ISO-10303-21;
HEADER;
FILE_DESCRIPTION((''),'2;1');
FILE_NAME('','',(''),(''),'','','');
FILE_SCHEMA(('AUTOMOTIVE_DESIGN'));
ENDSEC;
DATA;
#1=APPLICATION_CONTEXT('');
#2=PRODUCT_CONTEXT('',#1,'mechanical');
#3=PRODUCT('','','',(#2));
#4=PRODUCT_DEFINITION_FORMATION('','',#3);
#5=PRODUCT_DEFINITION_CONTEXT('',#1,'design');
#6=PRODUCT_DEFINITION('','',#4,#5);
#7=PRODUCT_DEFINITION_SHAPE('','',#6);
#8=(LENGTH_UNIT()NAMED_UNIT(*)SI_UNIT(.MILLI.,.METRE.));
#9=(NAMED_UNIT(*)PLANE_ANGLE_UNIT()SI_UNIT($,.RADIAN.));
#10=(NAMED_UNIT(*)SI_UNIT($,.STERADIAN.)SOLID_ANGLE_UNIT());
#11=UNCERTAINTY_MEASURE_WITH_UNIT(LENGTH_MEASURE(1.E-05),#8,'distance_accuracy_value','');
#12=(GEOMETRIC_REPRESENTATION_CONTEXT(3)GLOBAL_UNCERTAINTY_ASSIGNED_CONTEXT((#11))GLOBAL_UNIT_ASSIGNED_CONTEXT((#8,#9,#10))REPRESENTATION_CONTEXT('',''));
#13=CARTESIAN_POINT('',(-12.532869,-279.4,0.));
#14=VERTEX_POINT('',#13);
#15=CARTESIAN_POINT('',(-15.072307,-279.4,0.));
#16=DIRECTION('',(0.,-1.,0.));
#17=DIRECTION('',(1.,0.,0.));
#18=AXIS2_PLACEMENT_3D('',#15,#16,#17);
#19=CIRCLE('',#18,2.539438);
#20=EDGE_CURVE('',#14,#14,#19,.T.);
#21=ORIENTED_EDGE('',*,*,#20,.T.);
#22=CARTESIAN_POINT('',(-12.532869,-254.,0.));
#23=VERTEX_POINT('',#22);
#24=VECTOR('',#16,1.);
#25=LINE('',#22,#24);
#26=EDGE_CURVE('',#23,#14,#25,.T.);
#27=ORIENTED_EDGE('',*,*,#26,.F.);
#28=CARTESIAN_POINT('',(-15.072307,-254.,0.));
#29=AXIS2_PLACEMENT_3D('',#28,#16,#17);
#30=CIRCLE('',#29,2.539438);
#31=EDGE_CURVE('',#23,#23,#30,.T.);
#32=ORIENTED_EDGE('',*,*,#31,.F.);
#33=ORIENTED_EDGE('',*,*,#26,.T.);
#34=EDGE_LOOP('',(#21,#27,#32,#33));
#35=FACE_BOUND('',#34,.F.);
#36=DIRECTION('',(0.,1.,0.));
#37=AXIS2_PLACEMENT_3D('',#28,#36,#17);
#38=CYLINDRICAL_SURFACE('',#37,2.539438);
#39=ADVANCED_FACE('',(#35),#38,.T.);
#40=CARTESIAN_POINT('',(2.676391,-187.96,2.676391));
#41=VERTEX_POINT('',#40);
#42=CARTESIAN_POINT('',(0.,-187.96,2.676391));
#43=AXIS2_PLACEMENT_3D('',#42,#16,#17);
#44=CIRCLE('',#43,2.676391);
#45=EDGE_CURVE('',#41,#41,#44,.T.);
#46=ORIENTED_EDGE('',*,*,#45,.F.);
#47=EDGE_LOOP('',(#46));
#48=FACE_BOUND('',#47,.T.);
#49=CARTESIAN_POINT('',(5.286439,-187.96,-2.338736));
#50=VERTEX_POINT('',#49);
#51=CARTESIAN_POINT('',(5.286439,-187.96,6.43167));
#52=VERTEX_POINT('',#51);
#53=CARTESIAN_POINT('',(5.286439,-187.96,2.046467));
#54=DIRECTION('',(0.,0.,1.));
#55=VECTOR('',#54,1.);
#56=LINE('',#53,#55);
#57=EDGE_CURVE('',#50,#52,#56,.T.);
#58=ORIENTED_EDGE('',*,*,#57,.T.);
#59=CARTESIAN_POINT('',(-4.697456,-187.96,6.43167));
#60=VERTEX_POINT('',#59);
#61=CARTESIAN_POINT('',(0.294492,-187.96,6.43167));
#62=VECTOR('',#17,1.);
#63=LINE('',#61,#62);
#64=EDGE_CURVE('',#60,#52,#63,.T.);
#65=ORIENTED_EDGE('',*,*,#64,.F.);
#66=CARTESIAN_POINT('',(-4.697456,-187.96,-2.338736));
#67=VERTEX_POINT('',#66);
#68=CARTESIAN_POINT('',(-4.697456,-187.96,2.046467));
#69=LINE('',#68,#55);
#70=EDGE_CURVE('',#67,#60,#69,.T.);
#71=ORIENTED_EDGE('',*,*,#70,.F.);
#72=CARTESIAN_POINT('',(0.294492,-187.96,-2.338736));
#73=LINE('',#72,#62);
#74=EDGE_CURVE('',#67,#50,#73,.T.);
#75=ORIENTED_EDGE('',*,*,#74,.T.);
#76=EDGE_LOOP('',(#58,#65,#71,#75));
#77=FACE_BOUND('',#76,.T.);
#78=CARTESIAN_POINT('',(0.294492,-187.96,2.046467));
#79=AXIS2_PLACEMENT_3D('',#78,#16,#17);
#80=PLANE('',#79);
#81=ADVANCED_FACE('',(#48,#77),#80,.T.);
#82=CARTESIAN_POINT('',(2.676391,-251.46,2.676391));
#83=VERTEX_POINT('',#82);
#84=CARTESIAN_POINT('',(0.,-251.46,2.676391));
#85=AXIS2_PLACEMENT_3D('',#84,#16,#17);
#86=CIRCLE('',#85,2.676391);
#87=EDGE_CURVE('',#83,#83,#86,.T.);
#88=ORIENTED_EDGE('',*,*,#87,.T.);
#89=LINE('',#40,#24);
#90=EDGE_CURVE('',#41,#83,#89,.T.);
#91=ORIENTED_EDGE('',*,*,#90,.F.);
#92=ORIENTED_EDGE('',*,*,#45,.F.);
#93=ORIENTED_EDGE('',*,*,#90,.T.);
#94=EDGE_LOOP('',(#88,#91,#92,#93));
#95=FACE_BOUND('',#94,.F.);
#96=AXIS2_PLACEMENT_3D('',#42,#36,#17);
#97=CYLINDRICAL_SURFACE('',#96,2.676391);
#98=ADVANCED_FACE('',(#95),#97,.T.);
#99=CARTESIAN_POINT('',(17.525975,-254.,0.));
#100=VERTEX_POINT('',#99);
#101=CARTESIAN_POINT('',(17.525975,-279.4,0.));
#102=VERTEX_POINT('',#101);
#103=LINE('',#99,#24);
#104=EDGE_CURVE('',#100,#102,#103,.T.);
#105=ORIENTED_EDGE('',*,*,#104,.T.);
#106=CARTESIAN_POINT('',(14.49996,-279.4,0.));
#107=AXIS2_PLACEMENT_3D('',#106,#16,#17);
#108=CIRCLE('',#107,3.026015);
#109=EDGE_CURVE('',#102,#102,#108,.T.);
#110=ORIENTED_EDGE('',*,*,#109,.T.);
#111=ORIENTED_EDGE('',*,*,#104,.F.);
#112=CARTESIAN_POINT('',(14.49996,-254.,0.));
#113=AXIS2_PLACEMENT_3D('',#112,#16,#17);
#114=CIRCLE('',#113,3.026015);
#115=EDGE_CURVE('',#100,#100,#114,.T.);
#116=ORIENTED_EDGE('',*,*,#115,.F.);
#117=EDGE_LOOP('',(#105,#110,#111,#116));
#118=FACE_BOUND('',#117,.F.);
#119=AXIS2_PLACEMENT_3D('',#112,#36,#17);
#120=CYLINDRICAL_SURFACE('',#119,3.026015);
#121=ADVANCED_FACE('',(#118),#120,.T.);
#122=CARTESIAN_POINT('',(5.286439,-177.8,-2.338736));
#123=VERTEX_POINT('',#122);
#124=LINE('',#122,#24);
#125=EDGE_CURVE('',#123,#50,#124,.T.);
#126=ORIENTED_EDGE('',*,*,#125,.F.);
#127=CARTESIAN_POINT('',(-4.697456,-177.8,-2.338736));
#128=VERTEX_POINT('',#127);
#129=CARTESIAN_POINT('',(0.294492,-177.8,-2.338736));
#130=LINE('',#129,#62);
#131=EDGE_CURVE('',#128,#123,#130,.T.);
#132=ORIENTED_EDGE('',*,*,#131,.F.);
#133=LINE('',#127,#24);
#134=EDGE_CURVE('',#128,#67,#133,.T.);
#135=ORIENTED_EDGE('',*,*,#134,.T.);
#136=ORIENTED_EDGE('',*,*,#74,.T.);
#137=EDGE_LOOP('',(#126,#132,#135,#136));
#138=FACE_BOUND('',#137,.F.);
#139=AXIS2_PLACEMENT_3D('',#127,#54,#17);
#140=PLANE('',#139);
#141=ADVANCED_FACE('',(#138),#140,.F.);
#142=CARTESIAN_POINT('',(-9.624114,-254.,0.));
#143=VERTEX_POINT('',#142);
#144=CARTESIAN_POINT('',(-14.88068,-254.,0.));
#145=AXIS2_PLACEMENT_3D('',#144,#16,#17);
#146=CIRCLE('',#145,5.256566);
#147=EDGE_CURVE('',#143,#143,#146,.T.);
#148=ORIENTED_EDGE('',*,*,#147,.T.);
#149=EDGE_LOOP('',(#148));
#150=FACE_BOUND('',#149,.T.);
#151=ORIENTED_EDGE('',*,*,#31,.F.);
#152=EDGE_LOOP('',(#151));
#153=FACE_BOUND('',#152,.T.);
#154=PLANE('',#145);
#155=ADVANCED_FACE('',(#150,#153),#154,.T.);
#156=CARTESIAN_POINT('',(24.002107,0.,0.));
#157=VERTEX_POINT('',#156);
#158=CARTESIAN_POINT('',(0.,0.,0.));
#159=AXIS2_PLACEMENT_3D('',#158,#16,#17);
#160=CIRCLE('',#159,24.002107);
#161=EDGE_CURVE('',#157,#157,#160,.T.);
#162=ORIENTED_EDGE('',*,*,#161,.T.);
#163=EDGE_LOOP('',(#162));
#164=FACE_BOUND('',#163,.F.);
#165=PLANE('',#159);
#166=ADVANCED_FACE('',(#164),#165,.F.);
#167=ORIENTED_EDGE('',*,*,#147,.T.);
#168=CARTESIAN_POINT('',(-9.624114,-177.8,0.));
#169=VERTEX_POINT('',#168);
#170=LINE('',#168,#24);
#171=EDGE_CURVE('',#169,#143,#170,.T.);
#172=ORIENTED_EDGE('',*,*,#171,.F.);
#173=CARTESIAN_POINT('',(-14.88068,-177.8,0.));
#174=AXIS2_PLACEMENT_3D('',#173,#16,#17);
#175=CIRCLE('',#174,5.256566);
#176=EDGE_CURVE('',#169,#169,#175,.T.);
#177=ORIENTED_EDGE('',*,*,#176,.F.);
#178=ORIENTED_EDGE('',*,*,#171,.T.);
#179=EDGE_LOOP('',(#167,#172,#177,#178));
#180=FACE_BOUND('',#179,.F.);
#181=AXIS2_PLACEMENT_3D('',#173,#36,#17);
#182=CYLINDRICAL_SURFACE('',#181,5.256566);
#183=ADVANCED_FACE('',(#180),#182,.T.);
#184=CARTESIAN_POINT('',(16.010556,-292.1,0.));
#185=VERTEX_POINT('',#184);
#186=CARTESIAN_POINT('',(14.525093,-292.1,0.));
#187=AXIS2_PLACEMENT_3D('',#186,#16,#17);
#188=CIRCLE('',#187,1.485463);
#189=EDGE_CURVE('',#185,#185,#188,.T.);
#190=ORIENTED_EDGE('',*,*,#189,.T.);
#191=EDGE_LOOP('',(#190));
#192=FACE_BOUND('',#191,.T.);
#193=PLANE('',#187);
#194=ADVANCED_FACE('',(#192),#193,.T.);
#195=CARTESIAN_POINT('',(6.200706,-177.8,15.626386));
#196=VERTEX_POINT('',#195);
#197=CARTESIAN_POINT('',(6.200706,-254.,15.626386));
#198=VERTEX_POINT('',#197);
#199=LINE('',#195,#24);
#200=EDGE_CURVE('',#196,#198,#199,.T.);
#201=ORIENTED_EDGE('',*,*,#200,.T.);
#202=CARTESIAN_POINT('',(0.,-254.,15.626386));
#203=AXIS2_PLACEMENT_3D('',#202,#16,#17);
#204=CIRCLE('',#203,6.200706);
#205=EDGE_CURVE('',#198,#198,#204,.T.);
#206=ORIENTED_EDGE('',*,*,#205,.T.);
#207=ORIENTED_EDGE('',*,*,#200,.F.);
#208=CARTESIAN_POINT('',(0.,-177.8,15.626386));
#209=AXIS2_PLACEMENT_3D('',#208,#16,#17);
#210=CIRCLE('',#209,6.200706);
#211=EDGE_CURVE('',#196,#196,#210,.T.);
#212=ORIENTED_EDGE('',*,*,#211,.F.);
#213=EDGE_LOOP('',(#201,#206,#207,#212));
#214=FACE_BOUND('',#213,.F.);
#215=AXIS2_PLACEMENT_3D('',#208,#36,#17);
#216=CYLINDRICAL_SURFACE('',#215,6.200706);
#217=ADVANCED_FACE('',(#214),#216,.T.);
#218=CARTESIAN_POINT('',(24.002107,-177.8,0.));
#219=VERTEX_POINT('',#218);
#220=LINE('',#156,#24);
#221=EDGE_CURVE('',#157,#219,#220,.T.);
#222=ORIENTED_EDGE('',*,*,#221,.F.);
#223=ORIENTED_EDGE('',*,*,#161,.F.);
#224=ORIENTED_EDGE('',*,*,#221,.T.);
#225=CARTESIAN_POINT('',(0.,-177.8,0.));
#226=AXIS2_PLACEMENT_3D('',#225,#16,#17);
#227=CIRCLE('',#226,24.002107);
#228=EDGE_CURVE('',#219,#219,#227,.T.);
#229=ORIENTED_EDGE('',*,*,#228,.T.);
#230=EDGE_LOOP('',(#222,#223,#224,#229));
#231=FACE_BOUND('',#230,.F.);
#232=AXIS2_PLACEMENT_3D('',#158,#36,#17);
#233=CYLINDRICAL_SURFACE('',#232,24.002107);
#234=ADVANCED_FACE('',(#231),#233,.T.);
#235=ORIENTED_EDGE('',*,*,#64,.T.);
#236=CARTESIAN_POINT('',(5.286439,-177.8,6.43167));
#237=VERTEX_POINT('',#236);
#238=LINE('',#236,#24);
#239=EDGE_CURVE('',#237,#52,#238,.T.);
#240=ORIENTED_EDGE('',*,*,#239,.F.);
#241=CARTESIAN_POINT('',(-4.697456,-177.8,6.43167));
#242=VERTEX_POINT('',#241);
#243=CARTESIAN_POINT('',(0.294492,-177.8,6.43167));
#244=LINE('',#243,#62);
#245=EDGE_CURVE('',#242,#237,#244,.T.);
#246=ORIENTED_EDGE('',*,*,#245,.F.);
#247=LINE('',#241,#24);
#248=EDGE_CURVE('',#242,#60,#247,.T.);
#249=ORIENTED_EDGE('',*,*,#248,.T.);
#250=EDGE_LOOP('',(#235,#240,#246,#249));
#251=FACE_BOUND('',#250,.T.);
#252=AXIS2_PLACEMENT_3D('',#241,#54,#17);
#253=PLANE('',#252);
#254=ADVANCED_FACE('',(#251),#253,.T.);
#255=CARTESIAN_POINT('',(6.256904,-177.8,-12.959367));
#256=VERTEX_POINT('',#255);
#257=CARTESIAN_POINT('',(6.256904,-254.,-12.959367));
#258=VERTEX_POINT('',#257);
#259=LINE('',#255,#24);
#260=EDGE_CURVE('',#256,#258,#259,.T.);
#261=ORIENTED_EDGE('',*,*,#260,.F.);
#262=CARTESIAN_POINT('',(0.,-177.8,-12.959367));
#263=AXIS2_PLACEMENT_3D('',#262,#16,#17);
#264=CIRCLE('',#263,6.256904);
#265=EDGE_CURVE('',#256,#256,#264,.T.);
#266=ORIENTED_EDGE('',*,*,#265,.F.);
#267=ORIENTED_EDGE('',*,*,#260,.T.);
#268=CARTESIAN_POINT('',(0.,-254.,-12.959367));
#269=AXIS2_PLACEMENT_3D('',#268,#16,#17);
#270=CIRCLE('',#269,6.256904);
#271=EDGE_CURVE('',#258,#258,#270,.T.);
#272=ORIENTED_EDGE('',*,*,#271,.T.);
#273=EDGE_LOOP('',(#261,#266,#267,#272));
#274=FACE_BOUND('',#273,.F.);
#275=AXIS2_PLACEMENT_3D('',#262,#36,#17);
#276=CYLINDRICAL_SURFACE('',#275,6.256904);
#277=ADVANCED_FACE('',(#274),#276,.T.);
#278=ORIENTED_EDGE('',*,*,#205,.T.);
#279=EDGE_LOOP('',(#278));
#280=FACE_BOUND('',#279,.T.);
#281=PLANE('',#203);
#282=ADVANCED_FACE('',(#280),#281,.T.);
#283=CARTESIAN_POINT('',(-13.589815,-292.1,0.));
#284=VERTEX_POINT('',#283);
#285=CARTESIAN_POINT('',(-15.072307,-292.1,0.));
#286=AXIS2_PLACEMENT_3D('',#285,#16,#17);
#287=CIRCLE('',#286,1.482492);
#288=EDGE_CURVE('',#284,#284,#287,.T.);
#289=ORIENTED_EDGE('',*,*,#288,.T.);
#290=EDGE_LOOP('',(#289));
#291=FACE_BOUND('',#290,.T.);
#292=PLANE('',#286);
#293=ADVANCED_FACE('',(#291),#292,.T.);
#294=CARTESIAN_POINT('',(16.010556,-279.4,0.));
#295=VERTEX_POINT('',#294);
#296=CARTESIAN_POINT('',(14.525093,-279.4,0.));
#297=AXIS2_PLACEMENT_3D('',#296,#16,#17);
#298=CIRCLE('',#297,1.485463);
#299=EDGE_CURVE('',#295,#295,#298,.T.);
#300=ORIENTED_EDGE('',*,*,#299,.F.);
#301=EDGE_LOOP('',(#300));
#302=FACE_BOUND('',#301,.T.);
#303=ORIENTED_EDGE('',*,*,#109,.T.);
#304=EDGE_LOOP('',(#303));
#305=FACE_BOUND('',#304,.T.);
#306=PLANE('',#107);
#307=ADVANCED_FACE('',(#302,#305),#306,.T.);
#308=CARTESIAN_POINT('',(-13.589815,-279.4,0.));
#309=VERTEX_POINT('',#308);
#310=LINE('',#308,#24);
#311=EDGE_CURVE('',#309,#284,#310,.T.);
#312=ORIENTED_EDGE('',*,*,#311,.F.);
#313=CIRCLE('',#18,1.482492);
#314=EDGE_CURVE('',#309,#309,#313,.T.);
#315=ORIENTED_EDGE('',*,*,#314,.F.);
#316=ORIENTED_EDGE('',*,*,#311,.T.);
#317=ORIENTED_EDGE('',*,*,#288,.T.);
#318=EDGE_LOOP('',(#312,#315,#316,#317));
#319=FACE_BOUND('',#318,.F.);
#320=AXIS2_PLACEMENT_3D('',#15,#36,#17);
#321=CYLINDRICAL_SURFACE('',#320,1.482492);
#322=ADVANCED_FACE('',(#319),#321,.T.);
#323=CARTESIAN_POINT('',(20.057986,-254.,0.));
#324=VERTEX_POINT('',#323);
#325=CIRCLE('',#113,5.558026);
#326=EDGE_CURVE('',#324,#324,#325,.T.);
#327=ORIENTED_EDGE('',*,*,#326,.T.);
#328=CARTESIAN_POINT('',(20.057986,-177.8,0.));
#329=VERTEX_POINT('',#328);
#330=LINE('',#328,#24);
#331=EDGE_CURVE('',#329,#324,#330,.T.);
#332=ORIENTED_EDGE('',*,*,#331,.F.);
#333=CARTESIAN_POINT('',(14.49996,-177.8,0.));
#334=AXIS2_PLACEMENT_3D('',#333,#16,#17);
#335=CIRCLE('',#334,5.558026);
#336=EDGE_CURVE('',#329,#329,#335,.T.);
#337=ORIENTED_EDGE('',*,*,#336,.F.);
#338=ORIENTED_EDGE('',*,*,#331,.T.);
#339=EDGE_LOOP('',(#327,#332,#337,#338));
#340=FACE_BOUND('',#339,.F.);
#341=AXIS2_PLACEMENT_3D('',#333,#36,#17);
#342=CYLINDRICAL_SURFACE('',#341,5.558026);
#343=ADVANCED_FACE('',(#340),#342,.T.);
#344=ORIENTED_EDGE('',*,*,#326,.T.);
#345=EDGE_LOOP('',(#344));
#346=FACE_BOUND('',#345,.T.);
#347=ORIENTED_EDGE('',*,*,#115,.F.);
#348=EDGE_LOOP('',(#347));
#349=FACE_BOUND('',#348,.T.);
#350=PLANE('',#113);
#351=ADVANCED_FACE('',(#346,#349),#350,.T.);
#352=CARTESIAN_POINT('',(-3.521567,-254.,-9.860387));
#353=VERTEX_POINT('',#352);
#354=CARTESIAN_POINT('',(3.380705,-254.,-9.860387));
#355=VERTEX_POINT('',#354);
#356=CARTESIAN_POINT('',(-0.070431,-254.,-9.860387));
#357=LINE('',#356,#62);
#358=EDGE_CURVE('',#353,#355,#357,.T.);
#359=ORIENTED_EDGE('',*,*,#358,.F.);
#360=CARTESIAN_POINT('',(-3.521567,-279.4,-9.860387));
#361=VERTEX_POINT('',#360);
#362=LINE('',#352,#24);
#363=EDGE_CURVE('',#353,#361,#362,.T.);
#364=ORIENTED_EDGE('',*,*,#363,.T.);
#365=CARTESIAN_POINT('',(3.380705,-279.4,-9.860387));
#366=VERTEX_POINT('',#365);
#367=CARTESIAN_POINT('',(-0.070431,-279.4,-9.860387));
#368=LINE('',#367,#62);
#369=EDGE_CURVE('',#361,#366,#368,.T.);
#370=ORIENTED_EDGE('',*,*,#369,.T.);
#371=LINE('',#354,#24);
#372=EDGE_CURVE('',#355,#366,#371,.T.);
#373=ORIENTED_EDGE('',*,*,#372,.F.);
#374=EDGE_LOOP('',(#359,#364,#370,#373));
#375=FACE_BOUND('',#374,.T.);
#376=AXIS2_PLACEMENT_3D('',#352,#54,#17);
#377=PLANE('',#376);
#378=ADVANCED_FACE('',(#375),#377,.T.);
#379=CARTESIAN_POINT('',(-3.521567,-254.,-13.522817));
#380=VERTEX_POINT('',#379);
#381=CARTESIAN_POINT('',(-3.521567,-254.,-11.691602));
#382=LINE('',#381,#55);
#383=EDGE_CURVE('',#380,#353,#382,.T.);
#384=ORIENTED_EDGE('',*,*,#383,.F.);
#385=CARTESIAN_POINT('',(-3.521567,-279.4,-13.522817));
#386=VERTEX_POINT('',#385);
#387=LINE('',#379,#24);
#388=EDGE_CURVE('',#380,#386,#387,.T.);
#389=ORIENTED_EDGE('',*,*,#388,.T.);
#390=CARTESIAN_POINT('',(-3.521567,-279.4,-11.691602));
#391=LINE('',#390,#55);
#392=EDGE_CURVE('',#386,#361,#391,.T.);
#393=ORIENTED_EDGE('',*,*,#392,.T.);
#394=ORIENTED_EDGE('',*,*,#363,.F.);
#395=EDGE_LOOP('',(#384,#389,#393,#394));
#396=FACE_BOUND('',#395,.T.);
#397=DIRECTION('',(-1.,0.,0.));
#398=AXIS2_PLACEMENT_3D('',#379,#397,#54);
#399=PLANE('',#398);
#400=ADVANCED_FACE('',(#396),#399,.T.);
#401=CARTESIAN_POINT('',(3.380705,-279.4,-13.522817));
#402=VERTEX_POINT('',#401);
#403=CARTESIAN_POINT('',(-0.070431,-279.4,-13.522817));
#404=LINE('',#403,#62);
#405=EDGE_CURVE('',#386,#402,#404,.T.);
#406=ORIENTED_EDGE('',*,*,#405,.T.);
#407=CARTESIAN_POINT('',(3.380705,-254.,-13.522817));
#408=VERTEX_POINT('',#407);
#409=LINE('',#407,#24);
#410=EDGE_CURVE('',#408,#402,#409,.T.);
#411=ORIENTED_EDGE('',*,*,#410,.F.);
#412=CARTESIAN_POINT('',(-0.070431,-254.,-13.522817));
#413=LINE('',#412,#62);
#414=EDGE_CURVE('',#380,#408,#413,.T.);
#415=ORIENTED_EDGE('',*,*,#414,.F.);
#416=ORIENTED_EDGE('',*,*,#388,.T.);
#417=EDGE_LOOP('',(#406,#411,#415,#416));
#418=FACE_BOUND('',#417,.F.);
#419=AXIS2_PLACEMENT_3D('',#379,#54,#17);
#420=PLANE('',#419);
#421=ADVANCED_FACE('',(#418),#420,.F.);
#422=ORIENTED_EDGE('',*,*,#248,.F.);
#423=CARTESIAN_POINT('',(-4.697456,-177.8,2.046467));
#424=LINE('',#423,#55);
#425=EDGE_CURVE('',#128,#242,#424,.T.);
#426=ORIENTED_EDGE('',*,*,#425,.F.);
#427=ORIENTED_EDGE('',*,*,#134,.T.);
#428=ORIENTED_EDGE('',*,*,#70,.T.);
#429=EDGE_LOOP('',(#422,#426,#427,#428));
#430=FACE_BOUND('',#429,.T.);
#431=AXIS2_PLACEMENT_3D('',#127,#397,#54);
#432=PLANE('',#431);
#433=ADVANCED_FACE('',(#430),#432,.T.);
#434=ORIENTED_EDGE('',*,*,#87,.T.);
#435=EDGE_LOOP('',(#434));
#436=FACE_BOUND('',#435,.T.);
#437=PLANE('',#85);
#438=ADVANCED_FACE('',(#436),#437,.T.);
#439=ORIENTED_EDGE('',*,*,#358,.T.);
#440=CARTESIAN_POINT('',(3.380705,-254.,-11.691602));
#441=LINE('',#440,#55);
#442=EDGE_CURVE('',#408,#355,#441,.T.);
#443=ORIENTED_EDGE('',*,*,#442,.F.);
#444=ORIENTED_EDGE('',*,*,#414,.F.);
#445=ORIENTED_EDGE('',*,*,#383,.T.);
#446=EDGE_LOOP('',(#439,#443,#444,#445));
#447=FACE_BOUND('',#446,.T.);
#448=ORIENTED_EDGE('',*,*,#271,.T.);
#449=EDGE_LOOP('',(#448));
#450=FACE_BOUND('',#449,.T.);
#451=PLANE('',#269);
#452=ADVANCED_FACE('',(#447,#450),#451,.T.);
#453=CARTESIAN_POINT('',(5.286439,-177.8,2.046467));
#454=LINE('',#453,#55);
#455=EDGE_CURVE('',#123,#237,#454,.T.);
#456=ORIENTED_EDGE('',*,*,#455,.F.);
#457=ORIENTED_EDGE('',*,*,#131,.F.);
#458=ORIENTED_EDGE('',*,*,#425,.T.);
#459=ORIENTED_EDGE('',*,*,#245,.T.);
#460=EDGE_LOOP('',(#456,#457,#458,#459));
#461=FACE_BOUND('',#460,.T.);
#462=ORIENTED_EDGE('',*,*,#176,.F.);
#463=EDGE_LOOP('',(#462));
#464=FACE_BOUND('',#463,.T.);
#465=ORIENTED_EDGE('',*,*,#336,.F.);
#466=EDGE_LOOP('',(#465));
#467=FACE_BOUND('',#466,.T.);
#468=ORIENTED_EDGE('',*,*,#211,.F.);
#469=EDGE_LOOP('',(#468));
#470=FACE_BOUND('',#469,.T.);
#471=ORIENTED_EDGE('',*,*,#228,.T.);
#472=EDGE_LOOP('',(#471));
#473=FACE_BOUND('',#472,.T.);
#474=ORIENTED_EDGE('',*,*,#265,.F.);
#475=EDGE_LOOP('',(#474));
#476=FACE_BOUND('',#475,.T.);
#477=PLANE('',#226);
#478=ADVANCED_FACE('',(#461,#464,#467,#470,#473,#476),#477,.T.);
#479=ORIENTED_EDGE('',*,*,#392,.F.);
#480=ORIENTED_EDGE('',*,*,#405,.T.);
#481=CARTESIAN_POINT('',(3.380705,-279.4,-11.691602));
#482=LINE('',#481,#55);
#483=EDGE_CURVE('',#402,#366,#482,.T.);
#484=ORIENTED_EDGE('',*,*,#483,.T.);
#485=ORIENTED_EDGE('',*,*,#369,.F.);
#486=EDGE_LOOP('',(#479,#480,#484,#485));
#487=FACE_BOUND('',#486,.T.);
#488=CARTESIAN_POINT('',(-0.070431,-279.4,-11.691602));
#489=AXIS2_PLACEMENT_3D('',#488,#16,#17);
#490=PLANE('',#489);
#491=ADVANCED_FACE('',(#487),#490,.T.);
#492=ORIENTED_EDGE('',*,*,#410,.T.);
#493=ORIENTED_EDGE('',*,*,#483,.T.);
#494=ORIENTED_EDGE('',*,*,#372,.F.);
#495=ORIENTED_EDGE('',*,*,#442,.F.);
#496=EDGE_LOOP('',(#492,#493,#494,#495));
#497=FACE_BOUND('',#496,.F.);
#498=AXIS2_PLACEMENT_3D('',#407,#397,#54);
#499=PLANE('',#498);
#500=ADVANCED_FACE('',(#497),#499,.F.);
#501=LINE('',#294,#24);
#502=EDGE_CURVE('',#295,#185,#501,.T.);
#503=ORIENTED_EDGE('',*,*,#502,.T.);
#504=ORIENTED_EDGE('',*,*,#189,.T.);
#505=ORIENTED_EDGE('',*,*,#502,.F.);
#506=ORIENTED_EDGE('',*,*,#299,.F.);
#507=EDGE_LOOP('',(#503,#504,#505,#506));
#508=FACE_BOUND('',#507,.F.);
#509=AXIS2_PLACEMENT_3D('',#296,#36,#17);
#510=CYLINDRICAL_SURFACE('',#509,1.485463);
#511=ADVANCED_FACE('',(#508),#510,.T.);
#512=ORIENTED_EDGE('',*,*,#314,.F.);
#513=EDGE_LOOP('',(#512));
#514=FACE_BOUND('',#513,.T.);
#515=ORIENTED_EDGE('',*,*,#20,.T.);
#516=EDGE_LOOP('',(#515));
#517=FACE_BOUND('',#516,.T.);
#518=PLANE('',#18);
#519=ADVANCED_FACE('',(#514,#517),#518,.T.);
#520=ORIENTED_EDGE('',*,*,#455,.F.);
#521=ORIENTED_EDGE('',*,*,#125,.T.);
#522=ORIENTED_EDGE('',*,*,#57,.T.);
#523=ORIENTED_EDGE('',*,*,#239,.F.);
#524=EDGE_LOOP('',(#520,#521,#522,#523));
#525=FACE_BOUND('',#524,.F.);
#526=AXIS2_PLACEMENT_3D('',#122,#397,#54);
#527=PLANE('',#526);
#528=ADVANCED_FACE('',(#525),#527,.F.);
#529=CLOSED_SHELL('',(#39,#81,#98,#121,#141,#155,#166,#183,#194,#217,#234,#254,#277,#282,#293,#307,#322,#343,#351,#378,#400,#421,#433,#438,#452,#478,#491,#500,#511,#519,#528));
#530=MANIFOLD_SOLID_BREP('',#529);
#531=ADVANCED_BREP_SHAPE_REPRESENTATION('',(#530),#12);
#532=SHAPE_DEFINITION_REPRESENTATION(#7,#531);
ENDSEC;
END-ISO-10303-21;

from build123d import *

# Parameters (mm, degrees)
F0_R      = 24.0021072249
F1_DEPTH  = 177.8
F2_R      = 5.2565656239
F2_R_2    = 5.5580260463
F3_DEPTH  = 76.2
F4_R      = 2.5394375709
F4_R_2    = 3.0260152953
F5_DEPTH  = 25.4
F6_R      = 1.4824915772
F6_R_2    = 1.4854629447
F7_DEPTH  = 12.7
F8_W      = 9.9838948809
F8_H      = 8.7704055477
F9_DEPTH  = 10.16
F10_R     = 2.6763905771
F11_DEPTH = 63.5
F12_R     = 6.2569040354
F13_DEPTH = 76.2
F14_W     = 6.9022711832
F14_H     = 3.66242975
F15_DEPTH = 25.4
F16_R     = 6.2007059651
F17_DEPTH = 76.2


# Not quite as in the source:
# - a length typed as a fraction of an inch, garbled in the dataset ("3 / 203.2 mm" for 3/8 in), is restored


with BuildPart() as f1:
    # F0 (on Front) → F1 (new body)
    with BuildSketch(Plane.XZ):
        Circle(F0_R)
    extrude(amount=F1_DEPTH)

    # F2 (on face) → F3 (join)
    with BuildSketch(Plane.XZ.offset(177.8)):
        with Locations((-14.8806795478, 0)):
            Circle(F2_R)
        with Locations((14.4999595359, 0)):
            Circle(F2_R_2)
    extrude(amount=F3_DEPTH)

    # F4 (on face) → F5 (join)
    with BuildSketch(Plane.XZ.offset(254)):
        with Locations((-15.0723066181, 0)):
            Circle(F4_R)
        with Locations((14.4999595359, 0)):
            Circle(F4_R_2)
    extrude(amount=F5_DEPTH)

    # F6 (on face) → F7 (join)
    with BuildSketch(Plane.XZ.offset(279.4)):
        with Locations((-15.0723066181, 0)):
            Circle(F6_R)
        with Locations((14.5250931382, 0)):
            Circle(F6_R_2)
    extrude(amount=F7_DEPTH)

    # F8 (on face) → F9 (join)
    with BuildSketch(Plane.XZ.offset(177.8)):
        with Locations((0.2944918815, 2.0464671543)):
            Rectangle(F8_W, F8_H)
    extrude(amount=F9_DEPTH)

    # F10 (on face) → F11 (join)
    with BuildSketch(Plane.XZ.offset(187.96)):
        with Locations((0, 2.6763908099)):
            Circle(F10_R)
    extrude(amount=F11_DEPTH)

    # F12 (on face) → F13 (join)
    with BuildSketch(Plane.XZ.offset(177.8)):
        with Locations((0, -12.9593666643)):
            Circle(F12_R)
    extrude(amount=F13_DEPTH)

    # F14 (on face) → F15 (join)
    with BuildSketch(Plane.XZ.offset(254)):
        with Locations((-0.0704309205, -11.6916019469)):
            Rectangle(F14_W, F14_H)
    extrude(amount=F15_DEPTH)

    # F16 (on face) → F17 (join)
    with BuildSketch(Plane.XZ.offset(177.8)):
        with Locations((0, 15.626385808)):
            Circle(F16_R)
    extrude(amount=F17_DEPTH)


solid = f1.part
